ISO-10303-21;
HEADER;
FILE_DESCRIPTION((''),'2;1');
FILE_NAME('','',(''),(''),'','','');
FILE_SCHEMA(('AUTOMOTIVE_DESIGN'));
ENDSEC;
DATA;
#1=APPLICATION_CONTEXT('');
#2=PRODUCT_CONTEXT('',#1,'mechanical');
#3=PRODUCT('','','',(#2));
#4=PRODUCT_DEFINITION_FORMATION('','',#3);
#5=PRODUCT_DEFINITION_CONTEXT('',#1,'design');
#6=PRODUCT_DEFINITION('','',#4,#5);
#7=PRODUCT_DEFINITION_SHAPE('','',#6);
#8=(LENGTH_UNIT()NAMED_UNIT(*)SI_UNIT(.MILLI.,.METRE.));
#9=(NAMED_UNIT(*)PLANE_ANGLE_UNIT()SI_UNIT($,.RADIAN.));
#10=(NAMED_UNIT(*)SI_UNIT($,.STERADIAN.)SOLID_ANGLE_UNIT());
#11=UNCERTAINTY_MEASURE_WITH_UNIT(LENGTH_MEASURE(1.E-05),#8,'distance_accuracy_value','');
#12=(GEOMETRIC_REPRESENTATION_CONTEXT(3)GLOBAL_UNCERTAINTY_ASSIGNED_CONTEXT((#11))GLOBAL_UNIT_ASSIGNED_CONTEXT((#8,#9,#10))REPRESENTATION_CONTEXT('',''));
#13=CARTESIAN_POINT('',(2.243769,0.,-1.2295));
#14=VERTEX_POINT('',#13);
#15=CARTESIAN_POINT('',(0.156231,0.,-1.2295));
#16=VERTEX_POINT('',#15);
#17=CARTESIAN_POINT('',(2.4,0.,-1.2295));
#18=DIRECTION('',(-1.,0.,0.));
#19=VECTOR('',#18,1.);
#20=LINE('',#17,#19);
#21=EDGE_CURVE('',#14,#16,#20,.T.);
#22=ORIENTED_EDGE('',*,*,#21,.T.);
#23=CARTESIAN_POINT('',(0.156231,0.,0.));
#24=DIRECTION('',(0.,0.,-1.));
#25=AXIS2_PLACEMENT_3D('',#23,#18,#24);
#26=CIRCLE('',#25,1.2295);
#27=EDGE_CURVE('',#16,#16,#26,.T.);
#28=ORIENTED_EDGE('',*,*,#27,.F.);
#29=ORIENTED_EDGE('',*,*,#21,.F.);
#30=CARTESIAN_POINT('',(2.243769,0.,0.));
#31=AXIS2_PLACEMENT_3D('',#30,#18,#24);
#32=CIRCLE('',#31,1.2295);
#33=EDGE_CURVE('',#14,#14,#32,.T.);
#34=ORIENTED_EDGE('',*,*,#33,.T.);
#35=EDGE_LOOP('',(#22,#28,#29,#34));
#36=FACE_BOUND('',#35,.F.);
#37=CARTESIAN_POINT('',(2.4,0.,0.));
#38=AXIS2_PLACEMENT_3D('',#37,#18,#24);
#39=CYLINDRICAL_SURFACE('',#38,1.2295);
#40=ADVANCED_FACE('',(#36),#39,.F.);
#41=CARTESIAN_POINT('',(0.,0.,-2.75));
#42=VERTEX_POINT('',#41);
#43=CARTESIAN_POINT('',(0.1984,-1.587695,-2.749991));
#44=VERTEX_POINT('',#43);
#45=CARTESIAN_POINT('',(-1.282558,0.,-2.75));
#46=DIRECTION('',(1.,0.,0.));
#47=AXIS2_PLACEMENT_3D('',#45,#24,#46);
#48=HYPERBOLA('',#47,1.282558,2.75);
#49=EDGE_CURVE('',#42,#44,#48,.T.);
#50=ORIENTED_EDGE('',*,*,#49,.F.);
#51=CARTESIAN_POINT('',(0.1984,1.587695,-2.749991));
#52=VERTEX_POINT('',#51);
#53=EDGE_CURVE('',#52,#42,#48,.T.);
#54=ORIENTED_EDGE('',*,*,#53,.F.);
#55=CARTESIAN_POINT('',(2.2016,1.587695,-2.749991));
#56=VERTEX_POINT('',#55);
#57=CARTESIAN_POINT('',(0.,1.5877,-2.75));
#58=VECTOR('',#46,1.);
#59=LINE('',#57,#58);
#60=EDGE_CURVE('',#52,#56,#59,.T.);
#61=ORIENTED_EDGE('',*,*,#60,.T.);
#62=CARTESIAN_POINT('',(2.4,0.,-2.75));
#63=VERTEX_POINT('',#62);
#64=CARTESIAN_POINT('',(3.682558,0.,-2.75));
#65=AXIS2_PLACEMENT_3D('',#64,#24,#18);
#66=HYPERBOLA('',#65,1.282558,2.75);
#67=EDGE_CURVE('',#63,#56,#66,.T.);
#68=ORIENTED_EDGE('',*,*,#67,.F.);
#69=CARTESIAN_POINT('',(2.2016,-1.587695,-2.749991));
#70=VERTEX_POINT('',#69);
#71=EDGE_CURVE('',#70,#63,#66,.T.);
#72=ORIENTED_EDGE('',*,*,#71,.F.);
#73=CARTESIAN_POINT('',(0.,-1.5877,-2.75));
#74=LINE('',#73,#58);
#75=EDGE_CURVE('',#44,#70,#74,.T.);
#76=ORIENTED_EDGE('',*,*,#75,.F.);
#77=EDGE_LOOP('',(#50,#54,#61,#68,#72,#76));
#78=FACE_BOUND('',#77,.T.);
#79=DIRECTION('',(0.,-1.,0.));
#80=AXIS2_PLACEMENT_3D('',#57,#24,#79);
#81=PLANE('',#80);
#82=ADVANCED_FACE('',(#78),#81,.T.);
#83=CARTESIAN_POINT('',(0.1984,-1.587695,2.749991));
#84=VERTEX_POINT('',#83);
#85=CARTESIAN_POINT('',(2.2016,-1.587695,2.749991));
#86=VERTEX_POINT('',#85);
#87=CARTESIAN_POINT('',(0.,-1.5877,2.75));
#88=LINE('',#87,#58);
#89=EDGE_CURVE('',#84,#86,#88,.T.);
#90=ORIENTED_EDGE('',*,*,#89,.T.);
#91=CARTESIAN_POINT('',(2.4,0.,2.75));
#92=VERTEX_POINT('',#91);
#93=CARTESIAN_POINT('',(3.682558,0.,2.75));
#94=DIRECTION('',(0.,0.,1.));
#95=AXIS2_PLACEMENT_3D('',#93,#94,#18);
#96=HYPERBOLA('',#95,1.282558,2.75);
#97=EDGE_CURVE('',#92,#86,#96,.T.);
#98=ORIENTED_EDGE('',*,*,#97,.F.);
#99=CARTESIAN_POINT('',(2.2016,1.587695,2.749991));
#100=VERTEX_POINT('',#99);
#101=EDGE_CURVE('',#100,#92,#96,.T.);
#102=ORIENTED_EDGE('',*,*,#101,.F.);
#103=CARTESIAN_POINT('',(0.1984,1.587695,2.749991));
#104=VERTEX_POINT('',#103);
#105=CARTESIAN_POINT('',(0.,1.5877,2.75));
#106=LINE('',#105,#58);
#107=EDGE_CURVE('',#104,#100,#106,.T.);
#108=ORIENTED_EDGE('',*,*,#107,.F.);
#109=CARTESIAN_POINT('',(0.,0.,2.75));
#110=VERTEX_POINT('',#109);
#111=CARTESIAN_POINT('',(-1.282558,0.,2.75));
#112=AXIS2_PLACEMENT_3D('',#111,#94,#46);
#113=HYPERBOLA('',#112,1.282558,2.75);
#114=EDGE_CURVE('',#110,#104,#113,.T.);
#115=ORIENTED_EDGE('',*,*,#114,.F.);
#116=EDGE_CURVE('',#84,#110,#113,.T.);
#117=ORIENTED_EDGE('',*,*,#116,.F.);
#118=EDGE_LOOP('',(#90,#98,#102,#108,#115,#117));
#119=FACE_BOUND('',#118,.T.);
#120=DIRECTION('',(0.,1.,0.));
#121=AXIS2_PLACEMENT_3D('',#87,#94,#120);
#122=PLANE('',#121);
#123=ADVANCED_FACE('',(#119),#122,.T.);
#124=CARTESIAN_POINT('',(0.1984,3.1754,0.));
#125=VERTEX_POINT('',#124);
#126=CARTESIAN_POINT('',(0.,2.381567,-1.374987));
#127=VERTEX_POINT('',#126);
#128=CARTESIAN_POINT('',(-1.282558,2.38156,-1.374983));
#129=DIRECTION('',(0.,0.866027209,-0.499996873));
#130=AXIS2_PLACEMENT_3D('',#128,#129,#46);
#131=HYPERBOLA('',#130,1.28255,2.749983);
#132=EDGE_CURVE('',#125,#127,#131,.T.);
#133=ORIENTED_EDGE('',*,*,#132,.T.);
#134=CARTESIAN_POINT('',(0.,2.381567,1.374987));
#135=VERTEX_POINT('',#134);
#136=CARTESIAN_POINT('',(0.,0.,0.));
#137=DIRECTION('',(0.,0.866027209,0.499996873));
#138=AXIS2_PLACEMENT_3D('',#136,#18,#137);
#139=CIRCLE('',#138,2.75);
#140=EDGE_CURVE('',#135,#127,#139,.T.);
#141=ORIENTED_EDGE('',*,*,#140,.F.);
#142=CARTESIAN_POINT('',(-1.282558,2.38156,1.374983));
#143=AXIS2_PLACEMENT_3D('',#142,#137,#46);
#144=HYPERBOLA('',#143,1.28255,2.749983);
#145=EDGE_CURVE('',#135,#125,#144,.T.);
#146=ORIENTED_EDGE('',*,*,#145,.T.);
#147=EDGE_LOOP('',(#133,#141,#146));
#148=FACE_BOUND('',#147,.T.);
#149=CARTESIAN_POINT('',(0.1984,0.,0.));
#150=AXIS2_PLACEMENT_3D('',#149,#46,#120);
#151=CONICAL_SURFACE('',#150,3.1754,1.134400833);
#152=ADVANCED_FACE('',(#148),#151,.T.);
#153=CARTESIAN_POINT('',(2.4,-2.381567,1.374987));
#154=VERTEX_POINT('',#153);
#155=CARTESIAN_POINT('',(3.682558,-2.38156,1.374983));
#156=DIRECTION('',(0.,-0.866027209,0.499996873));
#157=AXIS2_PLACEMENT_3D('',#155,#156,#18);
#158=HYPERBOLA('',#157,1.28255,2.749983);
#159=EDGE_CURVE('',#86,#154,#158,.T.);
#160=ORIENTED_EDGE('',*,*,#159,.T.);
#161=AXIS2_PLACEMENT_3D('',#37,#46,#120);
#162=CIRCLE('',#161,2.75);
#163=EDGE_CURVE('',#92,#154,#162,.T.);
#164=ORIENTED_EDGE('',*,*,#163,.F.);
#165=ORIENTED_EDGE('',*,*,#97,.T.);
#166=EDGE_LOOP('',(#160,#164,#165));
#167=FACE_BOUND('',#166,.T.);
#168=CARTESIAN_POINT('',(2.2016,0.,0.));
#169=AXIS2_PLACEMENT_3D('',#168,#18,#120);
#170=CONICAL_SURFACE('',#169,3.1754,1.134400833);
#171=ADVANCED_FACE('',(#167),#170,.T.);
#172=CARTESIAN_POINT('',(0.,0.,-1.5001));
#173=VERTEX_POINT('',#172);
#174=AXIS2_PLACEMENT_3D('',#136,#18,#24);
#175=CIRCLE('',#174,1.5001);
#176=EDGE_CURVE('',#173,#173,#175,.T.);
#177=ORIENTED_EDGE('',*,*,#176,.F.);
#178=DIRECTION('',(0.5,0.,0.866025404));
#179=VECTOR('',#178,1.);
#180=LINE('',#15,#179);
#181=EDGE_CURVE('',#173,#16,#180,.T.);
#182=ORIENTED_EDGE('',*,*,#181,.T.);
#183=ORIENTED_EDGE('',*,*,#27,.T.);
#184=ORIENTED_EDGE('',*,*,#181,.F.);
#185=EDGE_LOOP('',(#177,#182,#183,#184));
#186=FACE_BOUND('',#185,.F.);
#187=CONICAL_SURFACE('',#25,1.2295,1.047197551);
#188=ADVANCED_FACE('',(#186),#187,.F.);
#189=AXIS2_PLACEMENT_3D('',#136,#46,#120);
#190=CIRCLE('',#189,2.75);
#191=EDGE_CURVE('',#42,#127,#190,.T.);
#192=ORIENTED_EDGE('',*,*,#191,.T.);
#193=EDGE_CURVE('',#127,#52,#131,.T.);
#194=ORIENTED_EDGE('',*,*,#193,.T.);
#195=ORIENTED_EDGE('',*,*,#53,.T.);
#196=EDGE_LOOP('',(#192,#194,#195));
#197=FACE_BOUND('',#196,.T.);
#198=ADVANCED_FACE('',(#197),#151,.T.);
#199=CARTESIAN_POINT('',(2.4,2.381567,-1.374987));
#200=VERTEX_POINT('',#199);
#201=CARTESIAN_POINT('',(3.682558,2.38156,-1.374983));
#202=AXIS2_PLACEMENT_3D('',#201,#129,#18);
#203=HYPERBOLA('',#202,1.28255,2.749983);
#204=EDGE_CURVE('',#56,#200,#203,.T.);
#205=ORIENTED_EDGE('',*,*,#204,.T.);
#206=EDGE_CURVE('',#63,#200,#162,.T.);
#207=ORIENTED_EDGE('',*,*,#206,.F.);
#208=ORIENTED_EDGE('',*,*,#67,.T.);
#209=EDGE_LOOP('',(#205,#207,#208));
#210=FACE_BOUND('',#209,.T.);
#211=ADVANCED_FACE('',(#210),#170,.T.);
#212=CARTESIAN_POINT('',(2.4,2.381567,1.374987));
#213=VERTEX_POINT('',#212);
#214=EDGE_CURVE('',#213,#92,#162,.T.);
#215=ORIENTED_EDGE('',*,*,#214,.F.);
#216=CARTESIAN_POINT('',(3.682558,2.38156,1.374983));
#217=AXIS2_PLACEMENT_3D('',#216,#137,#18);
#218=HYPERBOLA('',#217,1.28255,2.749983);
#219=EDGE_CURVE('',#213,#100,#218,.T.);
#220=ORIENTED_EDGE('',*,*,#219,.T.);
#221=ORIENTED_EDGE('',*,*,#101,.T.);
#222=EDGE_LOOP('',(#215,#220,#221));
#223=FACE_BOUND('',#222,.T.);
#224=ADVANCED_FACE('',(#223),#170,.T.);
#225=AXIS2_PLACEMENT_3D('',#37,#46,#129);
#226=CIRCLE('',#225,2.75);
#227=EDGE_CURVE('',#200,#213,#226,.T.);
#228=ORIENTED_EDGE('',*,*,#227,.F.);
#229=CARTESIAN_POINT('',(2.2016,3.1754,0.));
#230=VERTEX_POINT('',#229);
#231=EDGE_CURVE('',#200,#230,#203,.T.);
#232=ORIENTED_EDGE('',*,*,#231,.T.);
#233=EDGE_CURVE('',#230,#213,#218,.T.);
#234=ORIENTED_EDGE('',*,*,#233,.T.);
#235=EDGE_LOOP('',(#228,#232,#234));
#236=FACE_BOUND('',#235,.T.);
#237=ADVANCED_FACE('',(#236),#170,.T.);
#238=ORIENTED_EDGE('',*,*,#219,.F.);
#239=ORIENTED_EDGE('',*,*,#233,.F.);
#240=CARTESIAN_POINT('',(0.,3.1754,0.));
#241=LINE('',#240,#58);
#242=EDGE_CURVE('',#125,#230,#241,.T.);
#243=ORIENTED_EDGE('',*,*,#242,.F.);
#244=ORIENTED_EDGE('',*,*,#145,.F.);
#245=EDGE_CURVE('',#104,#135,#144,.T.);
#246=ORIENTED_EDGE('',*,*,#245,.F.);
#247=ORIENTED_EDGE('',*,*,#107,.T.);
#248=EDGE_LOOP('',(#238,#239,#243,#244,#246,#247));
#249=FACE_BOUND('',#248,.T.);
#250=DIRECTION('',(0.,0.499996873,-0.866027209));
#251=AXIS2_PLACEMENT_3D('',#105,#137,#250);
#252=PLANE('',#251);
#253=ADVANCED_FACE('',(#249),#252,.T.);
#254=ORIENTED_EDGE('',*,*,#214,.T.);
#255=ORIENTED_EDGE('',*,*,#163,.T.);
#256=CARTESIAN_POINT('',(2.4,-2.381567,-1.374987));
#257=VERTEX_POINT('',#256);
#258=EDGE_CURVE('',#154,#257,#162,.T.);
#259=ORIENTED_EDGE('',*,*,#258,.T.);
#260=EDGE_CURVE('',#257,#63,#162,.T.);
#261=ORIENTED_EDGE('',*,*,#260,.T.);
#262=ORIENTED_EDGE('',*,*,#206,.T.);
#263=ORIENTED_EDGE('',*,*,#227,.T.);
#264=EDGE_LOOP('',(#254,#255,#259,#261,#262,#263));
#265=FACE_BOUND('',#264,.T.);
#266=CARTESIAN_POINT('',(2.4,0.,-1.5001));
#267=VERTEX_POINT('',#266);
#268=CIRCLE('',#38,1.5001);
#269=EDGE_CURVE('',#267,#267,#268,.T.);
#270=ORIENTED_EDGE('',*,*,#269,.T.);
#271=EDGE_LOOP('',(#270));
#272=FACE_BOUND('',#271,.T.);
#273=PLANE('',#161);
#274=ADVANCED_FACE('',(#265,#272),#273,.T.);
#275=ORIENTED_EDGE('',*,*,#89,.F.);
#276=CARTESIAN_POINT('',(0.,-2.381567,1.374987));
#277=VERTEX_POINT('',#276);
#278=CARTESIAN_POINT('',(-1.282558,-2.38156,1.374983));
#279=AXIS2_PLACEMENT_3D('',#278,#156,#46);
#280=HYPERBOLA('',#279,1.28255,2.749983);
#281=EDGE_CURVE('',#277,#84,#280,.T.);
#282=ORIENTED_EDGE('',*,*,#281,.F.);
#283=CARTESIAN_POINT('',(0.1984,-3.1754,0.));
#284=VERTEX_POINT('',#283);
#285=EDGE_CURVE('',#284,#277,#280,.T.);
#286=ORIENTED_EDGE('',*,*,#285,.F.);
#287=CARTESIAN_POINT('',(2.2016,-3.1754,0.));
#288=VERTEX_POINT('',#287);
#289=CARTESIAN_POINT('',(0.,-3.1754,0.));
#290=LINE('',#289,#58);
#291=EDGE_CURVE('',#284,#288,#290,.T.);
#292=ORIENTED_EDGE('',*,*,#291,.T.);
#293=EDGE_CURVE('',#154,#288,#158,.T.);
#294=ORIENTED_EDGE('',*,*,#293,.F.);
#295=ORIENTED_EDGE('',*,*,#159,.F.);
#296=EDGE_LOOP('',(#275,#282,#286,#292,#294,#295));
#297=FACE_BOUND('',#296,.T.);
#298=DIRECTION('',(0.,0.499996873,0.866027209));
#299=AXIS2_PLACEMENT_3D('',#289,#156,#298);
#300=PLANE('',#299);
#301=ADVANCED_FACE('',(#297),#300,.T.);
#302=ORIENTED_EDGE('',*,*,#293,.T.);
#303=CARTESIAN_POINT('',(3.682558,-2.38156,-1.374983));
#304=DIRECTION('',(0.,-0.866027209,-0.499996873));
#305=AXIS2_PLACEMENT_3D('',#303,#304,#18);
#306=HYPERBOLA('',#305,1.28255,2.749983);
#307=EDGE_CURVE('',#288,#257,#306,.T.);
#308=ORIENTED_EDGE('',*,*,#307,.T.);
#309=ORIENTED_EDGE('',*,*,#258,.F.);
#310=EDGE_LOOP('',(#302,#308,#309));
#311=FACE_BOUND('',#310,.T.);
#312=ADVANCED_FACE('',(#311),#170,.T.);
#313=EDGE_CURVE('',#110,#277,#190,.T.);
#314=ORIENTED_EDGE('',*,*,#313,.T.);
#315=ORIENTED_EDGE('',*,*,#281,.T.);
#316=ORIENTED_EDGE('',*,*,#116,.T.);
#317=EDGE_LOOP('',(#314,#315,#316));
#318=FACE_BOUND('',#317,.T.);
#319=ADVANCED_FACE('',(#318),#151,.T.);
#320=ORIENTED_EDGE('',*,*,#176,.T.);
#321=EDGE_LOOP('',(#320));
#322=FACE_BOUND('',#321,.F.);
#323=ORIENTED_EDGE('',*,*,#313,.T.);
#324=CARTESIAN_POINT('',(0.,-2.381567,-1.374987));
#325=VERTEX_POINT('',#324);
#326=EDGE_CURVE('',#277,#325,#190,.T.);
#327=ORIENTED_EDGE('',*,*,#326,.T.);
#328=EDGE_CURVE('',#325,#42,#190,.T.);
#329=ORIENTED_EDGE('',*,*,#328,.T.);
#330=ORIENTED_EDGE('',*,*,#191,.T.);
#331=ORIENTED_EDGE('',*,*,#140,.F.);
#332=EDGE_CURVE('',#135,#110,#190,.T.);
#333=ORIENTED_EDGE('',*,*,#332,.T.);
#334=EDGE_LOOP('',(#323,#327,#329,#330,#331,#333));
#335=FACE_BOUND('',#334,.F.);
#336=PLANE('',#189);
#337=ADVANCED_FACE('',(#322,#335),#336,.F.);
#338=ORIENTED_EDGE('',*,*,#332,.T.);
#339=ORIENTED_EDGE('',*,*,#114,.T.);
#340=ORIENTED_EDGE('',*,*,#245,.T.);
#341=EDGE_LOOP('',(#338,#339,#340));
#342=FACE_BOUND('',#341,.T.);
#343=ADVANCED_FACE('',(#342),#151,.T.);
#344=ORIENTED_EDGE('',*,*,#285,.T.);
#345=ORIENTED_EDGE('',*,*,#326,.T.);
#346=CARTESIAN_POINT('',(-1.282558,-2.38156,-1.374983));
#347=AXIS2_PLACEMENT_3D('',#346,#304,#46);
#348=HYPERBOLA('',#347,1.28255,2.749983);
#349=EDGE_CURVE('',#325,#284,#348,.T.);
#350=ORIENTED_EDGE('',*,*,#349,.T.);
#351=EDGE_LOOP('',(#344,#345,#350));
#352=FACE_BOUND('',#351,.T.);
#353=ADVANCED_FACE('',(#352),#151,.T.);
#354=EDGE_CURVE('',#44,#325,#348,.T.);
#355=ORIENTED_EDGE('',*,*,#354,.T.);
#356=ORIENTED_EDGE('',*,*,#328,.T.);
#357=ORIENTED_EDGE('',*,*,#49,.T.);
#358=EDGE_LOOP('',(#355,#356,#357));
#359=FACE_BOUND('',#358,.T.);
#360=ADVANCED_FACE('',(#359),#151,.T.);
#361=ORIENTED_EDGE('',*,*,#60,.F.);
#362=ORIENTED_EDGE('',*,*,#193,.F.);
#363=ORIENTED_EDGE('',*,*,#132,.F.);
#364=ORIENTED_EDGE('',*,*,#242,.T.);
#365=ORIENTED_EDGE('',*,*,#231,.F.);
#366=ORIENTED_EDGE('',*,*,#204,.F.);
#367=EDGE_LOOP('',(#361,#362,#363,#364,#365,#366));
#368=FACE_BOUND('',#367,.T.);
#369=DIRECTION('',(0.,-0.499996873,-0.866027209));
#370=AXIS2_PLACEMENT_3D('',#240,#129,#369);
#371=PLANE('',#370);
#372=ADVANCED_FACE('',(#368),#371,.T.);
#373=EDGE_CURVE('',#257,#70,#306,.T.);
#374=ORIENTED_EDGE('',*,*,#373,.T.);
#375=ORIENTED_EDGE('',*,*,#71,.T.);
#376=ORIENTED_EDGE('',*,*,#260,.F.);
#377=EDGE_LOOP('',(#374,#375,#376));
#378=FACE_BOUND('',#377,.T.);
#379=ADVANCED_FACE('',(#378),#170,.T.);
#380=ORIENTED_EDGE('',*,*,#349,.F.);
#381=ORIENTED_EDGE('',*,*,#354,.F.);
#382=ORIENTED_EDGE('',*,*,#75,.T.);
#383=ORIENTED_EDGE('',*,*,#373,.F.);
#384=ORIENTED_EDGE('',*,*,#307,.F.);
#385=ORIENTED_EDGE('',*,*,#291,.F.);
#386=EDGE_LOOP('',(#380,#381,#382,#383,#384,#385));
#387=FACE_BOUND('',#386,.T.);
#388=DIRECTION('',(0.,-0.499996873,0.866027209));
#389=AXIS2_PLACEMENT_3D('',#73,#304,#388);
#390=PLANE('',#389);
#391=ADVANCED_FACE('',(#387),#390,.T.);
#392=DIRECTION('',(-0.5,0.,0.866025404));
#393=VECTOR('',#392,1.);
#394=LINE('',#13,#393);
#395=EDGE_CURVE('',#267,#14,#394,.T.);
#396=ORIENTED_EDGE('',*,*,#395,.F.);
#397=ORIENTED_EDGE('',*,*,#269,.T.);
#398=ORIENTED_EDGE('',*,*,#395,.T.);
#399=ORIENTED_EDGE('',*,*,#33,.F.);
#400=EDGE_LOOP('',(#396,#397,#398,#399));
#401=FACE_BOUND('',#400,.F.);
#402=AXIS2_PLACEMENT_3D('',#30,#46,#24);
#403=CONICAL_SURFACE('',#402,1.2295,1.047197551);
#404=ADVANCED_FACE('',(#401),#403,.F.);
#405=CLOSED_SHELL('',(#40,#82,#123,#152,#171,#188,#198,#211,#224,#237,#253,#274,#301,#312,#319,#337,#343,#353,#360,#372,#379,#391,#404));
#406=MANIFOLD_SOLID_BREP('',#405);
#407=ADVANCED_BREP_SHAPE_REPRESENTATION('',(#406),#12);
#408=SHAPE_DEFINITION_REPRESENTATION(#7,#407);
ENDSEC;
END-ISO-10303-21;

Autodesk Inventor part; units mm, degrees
ref_plane "YZ Plane" through (0, 0, 0) normal (1, 0, 0) x (0, 1, 0)
ref_plane "XZ Plane" through (0, 0, 0) normal (0, 1, 0) x (-1, 0, 0)
sketch "Sketch1" plane through (0, 0, 0) normal (1, 0, 0) x (0, 1, 0)
  line L0 (-3.1754, 0) -> (-1.5877, 2.75)
  line L1 (-1.5877, 2.75) -> (1.5877, 2.75)
  line L2 (1.5877, 2.75) -> (3.1754, 0)
  line L3 (3.1754, 0) -> (1.5877, -2.75)
  line L4 (1.5877, -2.75) -> (-1.5877, -2.75)
  line L5 (-1.5877, -2.75) -> (-3.1754, 0)
  point P0 (0, 0)
  point P1 (0, 0)
  dimension "d0" = 6.3509
extrude "Body" add sketch "Sketch1" along normal blind 2.4
sketch "Sketch2" plane through (0, 0, 0) normal (0, 0, 1) x (1, 0, 0)
  line L0 (0, 1.5877) -> (0, 3.1754) projected
  line L1 (0, 3.1754) -> (2.4, 3.1754) projected
  line L2 (2.4, 1.5877) -> (2.4, 3.1754) projected
  line L3 (-0.48, 0) -> (2.88, 0) projected
  line L4 (0.1984, 3.1754) -> (0, 2.75)
  line L5 (2.2016, 3.1754) -> (2.4, 2.75)
  dimension "d3" = 25
  dimension "d4" = 25
  dimension "d5" = 5.5
  dimension "d6" = 5.5
revolve "Chamfer1" cut sketch "Sketch2" angle 360 about axis through (-10, 0, 0) along (1, 0, 0)
sketch "Sketch3" plane through (2.4, 0, 0) normal (1, 0, 0) x (0, 0, -1)
  arc A0 (-1.375, -2.3816) -> (1.375, -2.3816) centre (0, 0) ccw projected
hole "Thread" at (2.4, 0, 0) direction (-1, 0, 0) diameter 2.459 end through all thread size "M3x0.5" class "6H" standard "ANSI Metric M Profile"
chamfer "Chamfer2" distance 0.2706 angle 30 1 edges at (2.4, 0, 1.2295) measured on face at (2.4, -2.2301, -0.0494)
chamfer "Chamfer3" distance 0.2706 angle 30 1 edges at (0, 0, 1.2295) measured on face at (0, -2.2301, -0.0494)
ref_plane "Work Plane1" through (-6.3375, 0, 0) normal (0, -0.8660254, -0.5) x (1, 0, 0)
equation "\"d0\" = 1.1547 * SW"
equation "\"d1\" = KOH"
equation "\"d3\" = ANG1"
equation "\"d4\" = ANG2"
equation "\"d5\" = SW0"
equation "\"d6\" = SW01"
equation "\"d8\" = -0.5 * GD1 + 0.5 * NND"
equation "\"d40\" = -0.5 * GD1 + 0.5 * NND"
equation "\"d10\" = -0.5 * GD1 + 0.5 * NND"
equation "\"d41\" = -0.5 * GD1 + 0.5 * NND"
equation "\"ANG1\" = 25deg"
equation "\"ANG2\" = 25deg"
equation "\"NND\" = 3"
equation "\"KOH\" = 2.4"
equation "\"SW\" = 5.5"
equation "\"SW0\" = SW"
equation "\"SW01\" = SW"
equation "\"GUL\" = 0.541266 * PTC"
equation "\"THREADDIA\" = 3"
equation "\"TOA\" = 30deg"
equation "\"PTC\" = 0.5"
equation "\"E0\" = 1.155 * SW"
equation "\"GAL\" = 0.541266 * PTC"
equation "\"SD2\" = 0"
equation "\"WFT\" = 0"
equation "\"GD1\" = 2.458734"
properties part number "ANSI B 18.2.4.1 M - M3 x 0.5" material "Steel, Mild"
